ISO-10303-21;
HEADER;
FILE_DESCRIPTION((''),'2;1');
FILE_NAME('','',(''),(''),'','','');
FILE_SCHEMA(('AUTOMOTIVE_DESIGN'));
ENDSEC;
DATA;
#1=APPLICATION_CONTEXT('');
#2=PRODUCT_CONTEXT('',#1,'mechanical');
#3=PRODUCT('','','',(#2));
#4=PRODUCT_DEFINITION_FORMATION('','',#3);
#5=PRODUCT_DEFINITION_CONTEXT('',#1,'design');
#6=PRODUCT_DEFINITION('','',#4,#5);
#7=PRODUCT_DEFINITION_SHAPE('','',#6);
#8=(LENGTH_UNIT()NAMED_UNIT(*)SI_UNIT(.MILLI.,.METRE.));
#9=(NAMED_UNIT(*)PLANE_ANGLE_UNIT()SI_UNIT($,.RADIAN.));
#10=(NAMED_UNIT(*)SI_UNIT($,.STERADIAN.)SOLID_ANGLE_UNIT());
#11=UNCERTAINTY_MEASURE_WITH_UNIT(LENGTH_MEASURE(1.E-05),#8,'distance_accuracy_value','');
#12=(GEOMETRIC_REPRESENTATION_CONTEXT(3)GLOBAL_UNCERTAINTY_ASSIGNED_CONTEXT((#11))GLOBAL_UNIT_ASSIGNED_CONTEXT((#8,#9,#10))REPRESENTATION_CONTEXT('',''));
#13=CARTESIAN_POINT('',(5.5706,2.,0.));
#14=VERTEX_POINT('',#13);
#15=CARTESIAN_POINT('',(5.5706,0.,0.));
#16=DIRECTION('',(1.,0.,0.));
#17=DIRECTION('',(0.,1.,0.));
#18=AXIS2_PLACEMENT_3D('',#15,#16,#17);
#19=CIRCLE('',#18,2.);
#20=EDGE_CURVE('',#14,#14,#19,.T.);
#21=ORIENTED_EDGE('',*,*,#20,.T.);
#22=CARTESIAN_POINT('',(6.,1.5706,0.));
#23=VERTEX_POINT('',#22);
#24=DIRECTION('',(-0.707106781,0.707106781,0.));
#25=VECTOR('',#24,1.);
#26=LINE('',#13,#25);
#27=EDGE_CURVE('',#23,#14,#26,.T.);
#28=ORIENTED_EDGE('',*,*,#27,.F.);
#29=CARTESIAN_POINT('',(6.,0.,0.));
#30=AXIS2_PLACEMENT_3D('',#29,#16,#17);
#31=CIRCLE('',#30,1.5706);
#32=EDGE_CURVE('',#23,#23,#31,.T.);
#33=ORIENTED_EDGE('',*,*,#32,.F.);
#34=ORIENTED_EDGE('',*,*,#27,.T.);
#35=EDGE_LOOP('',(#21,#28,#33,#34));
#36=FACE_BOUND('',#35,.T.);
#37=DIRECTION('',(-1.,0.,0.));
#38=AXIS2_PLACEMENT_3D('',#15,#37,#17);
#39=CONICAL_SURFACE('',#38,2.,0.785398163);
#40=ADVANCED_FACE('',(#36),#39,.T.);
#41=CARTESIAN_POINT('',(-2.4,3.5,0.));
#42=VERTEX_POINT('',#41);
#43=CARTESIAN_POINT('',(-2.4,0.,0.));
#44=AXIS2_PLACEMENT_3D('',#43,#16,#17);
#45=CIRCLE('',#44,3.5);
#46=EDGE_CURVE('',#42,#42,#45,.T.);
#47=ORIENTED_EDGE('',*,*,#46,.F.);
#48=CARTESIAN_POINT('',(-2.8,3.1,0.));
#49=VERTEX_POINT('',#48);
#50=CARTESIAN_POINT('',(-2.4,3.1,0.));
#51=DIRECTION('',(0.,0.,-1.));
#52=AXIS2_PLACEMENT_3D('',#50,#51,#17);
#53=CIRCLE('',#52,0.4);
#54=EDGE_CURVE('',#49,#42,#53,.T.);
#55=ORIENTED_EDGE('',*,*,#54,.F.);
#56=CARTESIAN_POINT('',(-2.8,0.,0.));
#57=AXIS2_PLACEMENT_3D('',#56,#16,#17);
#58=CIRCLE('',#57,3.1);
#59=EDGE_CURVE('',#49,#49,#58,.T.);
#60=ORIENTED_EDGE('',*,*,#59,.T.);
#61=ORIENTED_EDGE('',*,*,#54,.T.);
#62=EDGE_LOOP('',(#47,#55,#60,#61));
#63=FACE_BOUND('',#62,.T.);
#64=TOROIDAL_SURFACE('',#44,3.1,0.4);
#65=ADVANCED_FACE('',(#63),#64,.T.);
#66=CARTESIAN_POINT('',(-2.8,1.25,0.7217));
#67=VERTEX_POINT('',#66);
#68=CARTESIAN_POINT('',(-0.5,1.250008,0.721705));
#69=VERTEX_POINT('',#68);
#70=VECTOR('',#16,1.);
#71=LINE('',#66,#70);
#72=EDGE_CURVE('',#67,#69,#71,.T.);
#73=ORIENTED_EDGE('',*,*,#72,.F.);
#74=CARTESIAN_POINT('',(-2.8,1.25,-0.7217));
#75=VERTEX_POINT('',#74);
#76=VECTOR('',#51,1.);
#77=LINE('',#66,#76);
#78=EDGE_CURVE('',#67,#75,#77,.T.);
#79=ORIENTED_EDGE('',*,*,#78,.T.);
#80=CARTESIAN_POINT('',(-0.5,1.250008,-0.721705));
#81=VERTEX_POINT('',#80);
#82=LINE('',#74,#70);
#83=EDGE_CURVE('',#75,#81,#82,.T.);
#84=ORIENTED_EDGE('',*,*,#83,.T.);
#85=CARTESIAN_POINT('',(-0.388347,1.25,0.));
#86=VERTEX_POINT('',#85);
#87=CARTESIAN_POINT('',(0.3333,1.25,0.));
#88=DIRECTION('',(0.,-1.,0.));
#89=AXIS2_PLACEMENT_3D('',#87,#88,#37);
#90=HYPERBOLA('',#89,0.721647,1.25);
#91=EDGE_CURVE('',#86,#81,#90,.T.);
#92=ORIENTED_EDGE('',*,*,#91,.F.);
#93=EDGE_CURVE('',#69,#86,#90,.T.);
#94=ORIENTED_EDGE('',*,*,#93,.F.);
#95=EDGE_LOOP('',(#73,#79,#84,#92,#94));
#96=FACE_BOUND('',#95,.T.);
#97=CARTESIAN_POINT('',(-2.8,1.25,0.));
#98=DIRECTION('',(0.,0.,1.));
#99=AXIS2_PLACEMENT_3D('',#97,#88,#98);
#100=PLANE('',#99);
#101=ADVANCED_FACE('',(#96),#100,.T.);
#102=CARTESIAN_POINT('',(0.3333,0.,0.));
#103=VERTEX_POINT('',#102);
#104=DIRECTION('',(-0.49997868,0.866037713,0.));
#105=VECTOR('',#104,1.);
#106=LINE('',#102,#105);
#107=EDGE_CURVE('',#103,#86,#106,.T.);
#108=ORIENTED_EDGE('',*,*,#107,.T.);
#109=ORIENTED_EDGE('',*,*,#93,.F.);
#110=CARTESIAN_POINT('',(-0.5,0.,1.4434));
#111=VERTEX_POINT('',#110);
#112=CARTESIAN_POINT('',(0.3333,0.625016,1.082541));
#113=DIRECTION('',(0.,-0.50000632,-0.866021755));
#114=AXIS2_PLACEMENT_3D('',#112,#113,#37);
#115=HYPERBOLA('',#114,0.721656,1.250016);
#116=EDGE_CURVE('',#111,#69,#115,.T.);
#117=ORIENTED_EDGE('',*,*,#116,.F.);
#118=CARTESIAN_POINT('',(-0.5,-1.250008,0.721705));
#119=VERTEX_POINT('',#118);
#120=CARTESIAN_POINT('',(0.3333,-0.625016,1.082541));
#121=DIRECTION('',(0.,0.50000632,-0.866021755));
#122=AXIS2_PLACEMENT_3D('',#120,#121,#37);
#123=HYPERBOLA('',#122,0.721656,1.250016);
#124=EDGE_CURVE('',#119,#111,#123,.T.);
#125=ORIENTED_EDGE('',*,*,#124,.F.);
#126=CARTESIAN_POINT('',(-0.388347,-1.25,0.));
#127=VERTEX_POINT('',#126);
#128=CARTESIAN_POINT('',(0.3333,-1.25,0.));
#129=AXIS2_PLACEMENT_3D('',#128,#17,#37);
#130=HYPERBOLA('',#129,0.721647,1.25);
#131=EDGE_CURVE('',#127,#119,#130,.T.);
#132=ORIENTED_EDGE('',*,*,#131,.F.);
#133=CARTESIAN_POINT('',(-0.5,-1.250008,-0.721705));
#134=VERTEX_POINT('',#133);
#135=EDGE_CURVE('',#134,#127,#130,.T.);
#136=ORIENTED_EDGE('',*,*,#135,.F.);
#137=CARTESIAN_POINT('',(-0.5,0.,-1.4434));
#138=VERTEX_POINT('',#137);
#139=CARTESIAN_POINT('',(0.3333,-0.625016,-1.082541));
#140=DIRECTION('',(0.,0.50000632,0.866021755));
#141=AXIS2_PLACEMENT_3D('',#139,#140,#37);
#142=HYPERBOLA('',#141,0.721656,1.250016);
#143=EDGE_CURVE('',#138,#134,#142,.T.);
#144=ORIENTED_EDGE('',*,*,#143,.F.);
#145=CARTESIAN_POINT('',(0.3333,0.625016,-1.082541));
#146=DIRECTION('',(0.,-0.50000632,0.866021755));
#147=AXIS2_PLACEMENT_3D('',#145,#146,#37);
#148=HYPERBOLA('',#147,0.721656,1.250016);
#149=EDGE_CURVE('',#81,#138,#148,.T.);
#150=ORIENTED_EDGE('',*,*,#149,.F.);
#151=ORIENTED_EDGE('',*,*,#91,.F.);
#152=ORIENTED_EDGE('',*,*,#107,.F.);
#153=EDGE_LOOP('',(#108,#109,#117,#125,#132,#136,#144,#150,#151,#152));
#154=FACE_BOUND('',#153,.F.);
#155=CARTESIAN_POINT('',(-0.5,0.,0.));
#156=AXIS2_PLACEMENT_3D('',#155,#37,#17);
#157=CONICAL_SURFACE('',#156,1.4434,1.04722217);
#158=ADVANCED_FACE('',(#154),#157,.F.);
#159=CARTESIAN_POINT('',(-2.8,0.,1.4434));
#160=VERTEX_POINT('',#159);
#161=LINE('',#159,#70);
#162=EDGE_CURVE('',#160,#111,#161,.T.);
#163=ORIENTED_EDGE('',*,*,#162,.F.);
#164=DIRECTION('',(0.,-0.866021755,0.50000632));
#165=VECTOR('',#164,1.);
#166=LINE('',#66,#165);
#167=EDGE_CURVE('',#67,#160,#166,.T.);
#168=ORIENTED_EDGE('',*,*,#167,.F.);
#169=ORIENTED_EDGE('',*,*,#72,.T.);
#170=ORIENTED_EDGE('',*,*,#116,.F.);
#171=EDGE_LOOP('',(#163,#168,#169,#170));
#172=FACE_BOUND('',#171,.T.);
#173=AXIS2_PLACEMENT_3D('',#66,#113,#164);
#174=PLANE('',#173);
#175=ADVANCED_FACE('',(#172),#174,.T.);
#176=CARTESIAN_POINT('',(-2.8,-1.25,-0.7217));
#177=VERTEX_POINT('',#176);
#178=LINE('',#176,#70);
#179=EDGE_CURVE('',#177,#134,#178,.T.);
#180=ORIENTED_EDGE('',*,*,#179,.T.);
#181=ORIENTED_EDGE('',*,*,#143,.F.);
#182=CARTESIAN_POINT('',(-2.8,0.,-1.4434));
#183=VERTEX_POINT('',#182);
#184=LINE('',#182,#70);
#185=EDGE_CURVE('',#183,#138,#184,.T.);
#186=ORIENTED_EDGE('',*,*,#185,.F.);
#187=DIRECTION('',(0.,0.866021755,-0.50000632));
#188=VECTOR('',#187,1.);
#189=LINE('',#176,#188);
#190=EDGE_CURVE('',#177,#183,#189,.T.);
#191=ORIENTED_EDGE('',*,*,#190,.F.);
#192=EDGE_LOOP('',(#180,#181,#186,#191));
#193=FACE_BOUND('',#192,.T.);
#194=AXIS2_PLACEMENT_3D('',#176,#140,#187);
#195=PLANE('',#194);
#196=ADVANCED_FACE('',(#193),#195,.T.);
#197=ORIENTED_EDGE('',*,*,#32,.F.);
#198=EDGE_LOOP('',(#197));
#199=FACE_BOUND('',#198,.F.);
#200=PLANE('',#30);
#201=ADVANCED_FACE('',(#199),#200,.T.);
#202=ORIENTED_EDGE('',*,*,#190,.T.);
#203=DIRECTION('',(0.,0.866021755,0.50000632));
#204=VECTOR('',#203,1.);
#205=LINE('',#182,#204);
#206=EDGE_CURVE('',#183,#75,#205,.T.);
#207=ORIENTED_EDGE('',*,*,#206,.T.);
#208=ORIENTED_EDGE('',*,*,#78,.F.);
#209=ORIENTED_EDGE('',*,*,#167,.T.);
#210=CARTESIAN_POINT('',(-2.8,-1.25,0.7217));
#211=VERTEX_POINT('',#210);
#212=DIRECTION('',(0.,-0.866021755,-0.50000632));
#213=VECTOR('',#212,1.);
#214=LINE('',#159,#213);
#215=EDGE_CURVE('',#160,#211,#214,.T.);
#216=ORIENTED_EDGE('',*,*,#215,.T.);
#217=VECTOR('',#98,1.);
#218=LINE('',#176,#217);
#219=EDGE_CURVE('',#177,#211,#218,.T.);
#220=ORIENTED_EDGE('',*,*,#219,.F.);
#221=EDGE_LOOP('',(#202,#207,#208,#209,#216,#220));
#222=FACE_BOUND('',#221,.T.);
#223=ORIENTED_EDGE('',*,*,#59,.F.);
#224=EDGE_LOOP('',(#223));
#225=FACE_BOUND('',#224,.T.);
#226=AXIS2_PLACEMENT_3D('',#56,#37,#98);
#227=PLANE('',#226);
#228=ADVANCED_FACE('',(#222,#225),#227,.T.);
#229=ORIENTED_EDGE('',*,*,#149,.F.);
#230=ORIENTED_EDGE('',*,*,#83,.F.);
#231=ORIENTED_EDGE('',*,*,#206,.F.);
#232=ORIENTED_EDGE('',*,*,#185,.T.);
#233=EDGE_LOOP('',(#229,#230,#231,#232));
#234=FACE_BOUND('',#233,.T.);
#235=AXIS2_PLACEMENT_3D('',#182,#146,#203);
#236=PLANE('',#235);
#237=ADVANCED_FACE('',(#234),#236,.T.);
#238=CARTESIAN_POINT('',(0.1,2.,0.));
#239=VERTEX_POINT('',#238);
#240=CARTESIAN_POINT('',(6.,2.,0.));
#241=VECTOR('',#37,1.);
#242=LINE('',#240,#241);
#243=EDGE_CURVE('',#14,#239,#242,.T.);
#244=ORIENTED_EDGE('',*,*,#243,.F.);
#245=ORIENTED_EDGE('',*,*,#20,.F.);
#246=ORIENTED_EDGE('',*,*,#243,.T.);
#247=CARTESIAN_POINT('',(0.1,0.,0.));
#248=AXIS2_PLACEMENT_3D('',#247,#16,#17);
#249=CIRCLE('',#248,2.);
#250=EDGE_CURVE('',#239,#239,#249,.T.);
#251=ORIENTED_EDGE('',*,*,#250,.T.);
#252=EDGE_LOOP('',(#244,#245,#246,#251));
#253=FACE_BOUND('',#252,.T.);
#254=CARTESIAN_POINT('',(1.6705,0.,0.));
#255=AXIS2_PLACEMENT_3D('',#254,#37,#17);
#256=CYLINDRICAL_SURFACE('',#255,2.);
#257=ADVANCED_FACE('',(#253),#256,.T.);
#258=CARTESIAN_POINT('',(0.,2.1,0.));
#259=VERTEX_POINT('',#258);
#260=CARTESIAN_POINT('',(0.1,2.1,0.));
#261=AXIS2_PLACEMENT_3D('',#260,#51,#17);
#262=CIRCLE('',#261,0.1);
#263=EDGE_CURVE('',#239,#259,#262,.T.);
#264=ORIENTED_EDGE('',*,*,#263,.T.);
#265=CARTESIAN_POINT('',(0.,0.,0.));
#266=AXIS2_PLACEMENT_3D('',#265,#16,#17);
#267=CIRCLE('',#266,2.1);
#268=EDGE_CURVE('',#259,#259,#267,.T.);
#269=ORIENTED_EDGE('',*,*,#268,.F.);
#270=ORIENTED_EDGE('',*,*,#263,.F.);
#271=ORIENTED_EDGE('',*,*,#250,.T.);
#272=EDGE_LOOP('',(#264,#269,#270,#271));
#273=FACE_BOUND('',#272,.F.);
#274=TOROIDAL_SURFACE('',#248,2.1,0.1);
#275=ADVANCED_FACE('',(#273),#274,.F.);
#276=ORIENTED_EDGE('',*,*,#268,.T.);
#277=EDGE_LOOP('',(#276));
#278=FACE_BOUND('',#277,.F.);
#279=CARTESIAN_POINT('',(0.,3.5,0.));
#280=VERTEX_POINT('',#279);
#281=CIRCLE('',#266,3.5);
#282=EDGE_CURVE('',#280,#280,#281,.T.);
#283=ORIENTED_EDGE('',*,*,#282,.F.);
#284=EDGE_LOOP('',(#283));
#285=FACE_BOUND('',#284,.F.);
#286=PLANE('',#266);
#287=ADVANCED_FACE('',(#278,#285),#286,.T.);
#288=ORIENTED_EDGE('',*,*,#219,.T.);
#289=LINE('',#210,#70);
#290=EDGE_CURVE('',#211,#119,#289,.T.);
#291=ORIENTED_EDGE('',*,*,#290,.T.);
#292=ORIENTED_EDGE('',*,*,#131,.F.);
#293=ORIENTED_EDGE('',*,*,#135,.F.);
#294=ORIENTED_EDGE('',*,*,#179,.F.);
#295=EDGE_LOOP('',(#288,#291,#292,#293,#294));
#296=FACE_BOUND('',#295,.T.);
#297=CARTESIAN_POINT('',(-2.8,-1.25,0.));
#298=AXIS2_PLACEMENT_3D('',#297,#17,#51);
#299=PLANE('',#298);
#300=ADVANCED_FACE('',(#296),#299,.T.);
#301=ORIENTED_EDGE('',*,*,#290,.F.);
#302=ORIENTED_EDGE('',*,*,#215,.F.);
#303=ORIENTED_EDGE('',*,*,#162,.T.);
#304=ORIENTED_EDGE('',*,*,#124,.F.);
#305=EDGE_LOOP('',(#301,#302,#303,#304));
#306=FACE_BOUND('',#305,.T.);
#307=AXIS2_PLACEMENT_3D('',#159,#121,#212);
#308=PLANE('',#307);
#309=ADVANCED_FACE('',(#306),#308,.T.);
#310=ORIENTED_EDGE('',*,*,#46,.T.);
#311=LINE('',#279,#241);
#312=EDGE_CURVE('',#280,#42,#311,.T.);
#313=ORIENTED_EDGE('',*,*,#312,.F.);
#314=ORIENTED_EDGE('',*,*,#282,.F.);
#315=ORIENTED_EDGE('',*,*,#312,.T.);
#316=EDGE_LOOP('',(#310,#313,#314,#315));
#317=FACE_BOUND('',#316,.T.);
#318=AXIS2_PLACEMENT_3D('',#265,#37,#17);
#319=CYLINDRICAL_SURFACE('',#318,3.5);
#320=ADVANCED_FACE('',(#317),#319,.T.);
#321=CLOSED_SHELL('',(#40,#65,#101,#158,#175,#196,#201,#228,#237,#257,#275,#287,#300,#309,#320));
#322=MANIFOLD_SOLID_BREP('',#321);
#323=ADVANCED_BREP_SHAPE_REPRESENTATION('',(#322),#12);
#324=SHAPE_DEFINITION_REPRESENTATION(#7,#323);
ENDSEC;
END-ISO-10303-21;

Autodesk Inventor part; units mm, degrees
ref_plane "YZ Plane" through (0, 0, 0) normal (1, 0, 0) x (0, 1, 0)
ref_plane "XZ Plane" through (0, 0, 0) normal (0, 1, 0) x (-1, 0, 0)
sketch "Skizze1" plane through (0, 0, 0) normal (0, 0, 1) x (1, 0, 0)
  line L0 (0.3333, 0) -> (6, 0)
  line L1 (6, 0) -> (6, 2)
  line L2 (6, 2) -> (2.1, 2)
  line L3 (2.1, 2) -> (1.6705, 2)
  line L4 (1.6705, 2) -> (0, 2)
  line L5 (0, 2) -> (0, 3.5)
  line L6 (0, 3.5) -> (-2.8, 3.5)
  line L7 (-2.8, 3.5) -> (-2.8, 1.4434)
  line L8 (-2.8, 1.4434) -> (-0.5, 1.4434)
  line L9 (-0.5, 1.4434) -> (0.3333, 0)
  line L10 (-4.56, 0) -> (7.76, 0) projected
  line L11 (0, -0.7) -> (0, 4.2) projected
  line L12 (2.1, 2) -> (0, 2) construction
  dimension "d1" = 3.9
  dimension "d2" = 0.4295
  dimension "d3" = 2.8
  dimension "d4" = 2.3
  dimension "d5" = 60
  dimension "d6" = 4
  dimension "d7" = 4
  dimension "d8" = 2.8868
  dimension "d9" = 7
  dimension "d26" = 6
revolve "Körper" add sketch "Skizze1" angle 360 about axis through (0.3333, 0, 0) along (1, 0, 0) contours L9 L11 L4 L3 L2 L1 L0 | L9 L8 L7 L6 L5 L11
sketch "Skizze2" plane through (-2.8, 0, 0) normal (-1, 0, 0) x (0, 0, 1)
  circle A0 centre (0, 0) radius 1.4434 projected
  line L0 (0, -4.9) -> (0, 4.9) projected
  line L1 (-4.9, 0) -> (4.9, 0) projected
  line L2 (1.4434, 0) -> (0.7217, -1.25)
  line L3 (0.7217, -1.25) -> (-0.7217, -1.25)
  line L4 (-0.7217, -1.25) -> (-1.4434, 0)
  line L5 (-1.4434, 0) -> (-0.7217, 1.25)
  line L6 (-0.7217, 1.25) -> (0.7217, 1.25)
  line L7 (0.7217, 1.25) -> (1.4434, 0)
extrude "Loch" add sketch "Skizze2" against normal up to next contours L7 A0 | A0 L2 | L6 L0 A0 | A0 L0 L3 | L0 L6 A0 | A0 L3 L0 | L4 A0 | A0 L5
fillet "Rundung1" radius 0.4 1 edges at (-2.8, -3.5, 0)
thread "Gewinde" size "M4x0.7" class "6g" standard "ISO Metric profile" length 3.9
chamfer "Fase1" distance 0.4294 distance2 0.4294 1 edges at (6, -2, 0) measured on face at (6, 0.556, 0.0273)
ref_plane "Work Plane1" through (29, 0, 0) normal (0, -1, 0) x (1, 0, 0)
fillet "Fillet2" radius 0.1 1 edges at (0, -2, 0)
equation "\"d30\" = R"
equation "\"d15\" = -0.5 * SPD + 0.5 * GD"
equation "\"d16\" = GUL"
equation "\"d17\" = RR"
equation "\"d13\" = GEL"
equation "\"d1\" = GEL"
equation "\"d3\" = KOH"
equation "\"d4\" = INTI"
equation "\"d6\" = GD"
equation "\"d7\" = BDM"
equation "\"d8\" = 1.1547 * SW"
equation "\"d9\" = KOD"
equation "\"d26\" = NLG"
equation "\"GD\" = NND"
equation "\"NLG\" = 6"
equation "\"GEL\" = 3.9"
equation "\"KOD\" = 7"
equation "\"KOH\" = 2.8"
equation "\"INTI\" = 2.3"
equation "\"GAL\" = 0.61345 * PTC"
equation "\"GUL\" = 0.61345 * PTC"
equation "\"BDM\" = NND"
equation "\"SW\" = 2.5"
equation "\"RR\" = 0.4"
equation "\"SPD\" = NND - 1.2269 * PTC"
equation "\"R\" = 0.1"
equation "\"TOA\" = 30deg"
equation "\"GD1\" = THREADDIA - 1.2269 * PTC"
equation "\"THREADDIA\" = 4"
equation "\"FAWI\" = 45deg"
equation "\"ANG\" = 120deg"
equation "\"PTC\" = 0.7"
equation "\"NND\" = 4"
equation "\"E0\" = 1.155 * SW"
properties part number "DIN 7984 - M4 x 6" material "Stahl, weich"
